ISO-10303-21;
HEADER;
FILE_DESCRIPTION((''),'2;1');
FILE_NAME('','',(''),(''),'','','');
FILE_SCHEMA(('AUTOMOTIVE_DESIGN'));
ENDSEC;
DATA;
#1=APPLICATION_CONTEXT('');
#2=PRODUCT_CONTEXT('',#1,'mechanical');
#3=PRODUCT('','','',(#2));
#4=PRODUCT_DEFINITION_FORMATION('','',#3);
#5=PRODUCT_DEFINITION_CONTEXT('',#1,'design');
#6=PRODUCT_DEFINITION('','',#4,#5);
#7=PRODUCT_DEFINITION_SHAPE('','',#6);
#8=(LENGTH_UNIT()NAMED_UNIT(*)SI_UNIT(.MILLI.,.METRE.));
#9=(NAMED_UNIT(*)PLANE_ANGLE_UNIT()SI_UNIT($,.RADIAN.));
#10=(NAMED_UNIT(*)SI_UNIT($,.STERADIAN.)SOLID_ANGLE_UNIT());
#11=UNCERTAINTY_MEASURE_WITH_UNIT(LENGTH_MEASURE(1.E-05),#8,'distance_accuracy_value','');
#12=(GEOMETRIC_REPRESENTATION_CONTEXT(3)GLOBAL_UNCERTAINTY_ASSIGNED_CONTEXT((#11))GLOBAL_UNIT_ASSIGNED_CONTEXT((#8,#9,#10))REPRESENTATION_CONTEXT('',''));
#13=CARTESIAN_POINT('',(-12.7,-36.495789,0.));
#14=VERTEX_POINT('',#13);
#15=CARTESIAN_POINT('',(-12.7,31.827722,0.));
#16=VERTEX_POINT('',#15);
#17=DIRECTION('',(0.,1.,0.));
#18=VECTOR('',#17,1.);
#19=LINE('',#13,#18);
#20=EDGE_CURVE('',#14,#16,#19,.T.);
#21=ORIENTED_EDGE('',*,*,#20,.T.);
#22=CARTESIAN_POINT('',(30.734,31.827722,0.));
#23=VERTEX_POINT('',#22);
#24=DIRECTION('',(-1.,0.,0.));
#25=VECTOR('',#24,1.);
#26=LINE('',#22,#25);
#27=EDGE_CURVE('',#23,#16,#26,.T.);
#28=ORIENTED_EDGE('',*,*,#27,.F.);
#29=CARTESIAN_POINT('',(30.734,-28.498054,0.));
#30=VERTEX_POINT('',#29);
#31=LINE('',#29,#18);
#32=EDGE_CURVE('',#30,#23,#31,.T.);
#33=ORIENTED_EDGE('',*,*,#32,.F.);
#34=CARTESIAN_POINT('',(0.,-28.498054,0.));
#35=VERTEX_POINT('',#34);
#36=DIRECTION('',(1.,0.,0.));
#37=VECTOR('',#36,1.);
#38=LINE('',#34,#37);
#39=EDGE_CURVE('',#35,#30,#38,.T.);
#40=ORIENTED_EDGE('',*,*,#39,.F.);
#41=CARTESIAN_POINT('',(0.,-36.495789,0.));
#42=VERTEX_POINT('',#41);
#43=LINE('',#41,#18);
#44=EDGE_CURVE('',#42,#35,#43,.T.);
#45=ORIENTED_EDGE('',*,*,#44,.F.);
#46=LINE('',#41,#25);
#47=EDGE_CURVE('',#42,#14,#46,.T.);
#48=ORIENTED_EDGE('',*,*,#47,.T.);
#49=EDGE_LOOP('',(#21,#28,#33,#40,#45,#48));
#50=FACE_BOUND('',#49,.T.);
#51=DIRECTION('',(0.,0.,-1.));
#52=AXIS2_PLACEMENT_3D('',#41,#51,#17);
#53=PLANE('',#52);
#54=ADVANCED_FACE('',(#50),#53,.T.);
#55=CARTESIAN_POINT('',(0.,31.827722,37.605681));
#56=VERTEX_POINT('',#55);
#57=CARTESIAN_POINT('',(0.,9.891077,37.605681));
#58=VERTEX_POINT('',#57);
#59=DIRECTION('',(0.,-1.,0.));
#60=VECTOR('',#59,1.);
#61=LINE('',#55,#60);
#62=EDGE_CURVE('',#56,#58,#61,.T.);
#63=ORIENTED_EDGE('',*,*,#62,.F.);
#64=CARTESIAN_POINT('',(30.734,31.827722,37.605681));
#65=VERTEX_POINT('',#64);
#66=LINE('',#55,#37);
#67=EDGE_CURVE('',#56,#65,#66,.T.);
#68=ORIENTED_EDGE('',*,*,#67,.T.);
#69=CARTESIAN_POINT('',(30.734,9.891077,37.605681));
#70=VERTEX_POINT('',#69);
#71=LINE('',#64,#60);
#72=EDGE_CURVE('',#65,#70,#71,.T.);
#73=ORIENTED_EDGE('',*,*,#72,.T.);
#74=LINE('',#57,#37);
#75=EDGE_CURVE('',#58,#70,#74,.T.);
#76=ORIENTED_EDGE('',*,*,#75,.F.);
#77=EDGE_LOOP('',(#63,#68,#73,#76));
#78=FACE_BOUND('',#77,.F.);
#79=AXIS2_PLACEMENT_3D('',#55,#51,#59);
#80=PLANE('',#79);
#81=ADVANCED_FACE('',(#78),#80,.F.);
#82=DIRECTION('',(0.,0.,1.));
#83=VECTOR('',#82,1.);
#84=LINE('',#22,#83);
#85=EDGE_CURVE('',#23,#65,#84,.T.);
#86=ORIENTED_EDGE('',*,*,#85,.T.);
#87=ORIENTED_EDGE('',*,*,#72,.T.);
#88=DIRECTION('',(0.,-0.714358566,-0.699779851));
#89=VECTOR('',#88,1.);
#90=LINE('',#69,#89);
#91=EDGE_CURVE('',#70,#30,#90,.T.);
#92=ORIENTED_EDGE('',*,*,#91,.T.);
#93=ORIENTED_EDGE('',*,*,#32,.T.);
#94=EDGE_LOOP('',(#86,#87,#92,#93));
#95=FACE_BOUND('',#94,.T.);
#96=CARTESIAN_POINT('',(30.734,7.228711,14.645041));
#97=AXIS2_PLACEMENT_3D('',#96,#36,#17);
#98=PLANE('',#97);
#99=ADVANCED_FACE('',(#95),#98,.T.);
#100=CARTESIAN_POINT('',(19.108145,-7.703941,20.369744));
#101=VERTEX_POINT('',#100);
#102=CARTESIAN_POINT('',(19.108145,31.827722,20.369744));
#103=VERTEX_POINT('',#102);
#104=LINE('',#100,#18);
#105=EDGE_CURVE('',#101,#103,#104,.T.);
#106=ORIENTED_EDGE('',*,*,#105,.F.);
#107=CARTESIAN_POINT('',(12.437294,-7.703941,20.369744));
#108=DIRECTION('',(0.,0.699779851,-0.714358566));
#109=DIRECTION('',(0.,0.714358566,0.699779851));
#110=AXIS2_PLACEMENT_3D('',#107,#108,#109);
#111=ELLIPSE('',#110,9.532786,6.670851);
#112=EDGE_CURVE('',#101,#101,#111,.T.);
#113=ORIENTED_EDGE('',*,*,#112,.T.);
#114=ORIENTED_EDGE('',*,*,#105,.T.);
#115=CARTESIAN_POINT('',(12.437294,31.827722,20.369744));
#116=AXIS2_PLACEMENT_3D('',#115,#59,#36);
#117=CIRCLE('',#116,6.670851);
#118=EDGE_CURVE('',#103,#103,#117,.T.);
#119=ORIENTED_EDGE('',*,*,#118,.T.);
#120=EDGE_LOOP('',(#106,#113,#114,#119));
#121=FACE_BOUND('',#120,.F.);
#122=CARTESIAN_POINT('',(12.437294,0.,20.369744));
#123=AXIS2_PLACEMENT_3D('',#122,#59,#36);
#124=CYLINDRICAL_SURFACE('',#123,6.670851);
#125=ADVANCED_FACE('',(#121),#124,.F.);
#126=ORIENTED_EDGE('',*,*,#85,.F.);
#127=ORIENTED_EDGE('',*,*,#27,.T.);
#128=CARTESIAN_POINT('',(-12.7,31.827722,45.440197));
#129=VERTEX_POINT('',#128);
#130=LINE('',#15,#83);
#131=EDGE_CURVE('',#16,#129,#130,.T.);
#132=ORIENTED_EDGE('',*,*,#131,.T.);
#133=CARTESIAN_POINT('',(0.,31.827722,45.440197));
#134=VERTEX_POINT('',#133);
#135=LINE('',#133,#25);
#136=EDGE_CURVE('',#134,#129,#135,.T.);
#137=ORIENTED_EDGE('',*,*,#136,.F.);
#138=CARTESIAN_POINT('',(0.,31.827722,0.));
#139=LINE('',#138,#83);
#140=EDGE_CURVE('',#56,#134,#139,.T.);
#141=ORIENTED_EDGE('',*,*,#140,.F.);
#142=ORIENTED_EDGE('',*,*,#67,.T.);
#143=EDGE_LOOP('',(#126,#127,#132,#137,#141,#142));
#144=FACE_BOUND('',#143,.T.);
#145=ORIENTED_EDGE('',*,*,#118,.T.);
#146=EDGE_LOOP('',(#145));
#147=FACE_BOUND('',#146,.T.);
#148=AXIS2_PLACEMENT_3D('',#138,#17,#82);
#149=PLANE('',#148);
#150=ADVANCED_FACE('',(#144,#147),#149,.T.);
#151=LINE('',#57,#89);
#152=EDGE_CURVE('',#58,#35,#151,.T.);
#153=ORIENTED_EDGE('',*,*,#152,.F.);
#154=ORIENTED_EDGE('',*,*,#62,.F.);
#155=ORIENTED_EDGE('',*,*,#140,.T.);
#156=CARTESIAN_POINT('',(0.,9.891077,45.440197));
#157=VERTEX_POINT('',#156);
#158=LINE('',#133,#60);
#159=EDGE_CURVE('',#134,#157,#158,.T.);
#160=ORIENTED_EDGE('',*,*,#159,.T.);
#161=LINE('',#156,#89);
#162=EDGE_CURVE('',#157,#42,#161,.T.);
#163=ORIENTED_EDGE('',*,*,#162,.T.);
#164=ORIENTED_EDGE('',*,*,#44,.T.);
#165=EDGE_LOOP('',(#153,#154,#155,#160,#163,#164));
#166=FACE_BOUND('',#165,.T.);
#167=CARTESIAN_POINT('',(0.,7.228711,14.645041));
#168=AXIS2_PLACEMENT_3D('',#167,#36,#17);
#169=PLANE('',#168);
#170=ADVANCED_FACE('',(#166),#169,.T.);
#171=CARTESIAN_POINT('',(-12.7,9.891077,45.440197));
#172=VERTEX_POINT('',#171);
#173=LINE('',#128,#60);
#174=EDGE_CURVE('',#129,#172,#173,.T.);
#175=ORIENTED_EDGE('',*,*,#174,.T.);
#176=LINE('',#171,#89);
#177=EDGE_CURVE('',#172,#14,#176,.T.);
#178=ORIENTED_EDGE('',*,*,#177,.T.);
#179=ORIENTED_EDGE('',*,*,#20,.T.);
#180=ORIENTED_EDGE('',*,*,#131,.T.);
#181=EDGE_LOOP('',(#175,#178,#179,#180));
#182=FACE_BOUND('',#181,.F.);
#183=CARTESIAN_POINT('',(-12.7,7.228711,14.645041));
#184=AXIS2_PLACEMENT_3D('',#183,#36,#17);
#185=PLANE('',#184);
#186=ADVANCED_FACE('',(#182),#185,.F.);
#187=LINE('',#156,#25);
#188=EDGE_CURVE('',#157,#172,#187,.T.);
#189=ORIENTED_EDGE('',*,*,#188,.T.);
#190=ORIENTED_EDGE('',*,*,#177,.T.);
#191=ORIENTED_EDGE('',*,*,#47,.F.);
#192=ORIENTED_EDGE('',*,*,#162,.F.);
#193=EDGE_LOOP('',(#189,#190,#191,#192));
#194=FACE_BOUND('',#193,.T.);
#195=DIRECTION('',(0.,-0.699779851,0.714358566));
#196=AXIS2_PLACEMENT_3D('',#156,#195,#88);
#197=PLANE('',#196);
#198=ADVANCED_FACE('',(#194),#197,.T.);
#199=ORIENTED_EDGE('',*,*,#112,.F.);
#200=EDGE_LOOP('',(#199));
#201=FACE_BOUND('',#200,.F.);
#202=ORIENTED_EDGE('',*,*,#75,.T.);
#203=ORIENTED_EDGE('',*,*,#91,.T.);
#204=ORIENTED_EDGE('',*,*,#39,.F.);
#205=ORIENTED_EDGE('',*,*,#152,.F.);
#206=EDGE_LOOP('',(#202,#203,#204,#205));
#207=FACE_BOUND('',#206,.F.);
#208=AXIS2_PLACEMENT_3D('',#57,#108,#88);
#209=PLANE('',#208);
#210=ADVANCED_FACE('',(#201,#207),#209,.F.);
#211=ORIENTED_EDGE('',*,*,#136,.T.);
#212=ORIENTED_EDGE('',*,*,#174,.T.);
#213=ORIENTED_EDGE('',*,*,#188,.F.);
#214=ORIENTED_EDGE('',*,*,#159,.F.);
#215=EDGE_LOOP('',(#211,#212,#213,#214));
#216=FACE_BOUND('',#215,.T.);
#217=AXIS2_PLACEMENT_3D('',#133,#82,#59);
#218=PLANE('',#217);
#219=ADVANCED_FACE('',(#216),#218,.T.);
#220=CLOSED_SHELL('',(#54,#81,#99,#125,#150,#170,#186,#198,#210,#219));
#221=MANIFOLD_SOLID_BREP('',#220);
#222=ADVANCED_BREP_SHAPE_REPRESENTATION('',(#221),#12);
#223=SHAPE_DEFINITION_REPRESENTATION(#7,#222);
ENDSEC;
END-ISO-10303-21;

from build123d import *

# Parameters (mm, degrees)
F1_DEPTH = 30.734
F2_DEPTH = 12.7
F3_R     = 6.6708512145
F4_DEPTH = 45.212
F5_DEPTH = 29.972


# Not quite as in the source:
# - a feature names something its author has since deleted; it is built from what else it names


with BuildPart() as f1:
    # F0 (on Right) → F1 (new body)
    with BuildSketch(Plane.YZ):
        Polygon((-28.4980535507, 0), (31.8277217448, 0), (31.8277217448, 37.6056805253), (9.8910769448, 37.6056805253), align=None)
    extrude(amount=F1_DEPTH)

    # F0 (on Right) → F2 (join)
    with BuildSketch(Plane.YZ):
        Polygon((-28.4980535507, 0), (31.8277217448, 0), (31.8277217448, 37.6056805253), (9.8910769448, 37.6056805253), align=None)
        Polygon((9.8910769448, 37.6056805253), (31.8277217448, 37.6056805253), (31.8277217448, 45.440196991), (9.8910769448, 45.440196991), (-36.4957887537, 0), (-28.4980535507, 0), align=None)
    extrude(amount=-F2_DEPTH)

    # F3 (on Front) → F4 (cut)
    with BuildSketch(Plane.XZ):
        with Locations((12.4372942373, 20.3697439283)):
            Circle(F3_R)
    extrude(amount=-F4_DEPTH, mode=Mode.SUBTRACT)

    # F3 (on Front) → F5 (cut)
    with BuildSketch(Plane.XZ):
        with Locations((12.4372942373, 20.3697439283)):
            Circle(F3_R)
    extrude(amount=F5_DEPTH, mode=Mode.SUBTRACT)


solid = f1.part
